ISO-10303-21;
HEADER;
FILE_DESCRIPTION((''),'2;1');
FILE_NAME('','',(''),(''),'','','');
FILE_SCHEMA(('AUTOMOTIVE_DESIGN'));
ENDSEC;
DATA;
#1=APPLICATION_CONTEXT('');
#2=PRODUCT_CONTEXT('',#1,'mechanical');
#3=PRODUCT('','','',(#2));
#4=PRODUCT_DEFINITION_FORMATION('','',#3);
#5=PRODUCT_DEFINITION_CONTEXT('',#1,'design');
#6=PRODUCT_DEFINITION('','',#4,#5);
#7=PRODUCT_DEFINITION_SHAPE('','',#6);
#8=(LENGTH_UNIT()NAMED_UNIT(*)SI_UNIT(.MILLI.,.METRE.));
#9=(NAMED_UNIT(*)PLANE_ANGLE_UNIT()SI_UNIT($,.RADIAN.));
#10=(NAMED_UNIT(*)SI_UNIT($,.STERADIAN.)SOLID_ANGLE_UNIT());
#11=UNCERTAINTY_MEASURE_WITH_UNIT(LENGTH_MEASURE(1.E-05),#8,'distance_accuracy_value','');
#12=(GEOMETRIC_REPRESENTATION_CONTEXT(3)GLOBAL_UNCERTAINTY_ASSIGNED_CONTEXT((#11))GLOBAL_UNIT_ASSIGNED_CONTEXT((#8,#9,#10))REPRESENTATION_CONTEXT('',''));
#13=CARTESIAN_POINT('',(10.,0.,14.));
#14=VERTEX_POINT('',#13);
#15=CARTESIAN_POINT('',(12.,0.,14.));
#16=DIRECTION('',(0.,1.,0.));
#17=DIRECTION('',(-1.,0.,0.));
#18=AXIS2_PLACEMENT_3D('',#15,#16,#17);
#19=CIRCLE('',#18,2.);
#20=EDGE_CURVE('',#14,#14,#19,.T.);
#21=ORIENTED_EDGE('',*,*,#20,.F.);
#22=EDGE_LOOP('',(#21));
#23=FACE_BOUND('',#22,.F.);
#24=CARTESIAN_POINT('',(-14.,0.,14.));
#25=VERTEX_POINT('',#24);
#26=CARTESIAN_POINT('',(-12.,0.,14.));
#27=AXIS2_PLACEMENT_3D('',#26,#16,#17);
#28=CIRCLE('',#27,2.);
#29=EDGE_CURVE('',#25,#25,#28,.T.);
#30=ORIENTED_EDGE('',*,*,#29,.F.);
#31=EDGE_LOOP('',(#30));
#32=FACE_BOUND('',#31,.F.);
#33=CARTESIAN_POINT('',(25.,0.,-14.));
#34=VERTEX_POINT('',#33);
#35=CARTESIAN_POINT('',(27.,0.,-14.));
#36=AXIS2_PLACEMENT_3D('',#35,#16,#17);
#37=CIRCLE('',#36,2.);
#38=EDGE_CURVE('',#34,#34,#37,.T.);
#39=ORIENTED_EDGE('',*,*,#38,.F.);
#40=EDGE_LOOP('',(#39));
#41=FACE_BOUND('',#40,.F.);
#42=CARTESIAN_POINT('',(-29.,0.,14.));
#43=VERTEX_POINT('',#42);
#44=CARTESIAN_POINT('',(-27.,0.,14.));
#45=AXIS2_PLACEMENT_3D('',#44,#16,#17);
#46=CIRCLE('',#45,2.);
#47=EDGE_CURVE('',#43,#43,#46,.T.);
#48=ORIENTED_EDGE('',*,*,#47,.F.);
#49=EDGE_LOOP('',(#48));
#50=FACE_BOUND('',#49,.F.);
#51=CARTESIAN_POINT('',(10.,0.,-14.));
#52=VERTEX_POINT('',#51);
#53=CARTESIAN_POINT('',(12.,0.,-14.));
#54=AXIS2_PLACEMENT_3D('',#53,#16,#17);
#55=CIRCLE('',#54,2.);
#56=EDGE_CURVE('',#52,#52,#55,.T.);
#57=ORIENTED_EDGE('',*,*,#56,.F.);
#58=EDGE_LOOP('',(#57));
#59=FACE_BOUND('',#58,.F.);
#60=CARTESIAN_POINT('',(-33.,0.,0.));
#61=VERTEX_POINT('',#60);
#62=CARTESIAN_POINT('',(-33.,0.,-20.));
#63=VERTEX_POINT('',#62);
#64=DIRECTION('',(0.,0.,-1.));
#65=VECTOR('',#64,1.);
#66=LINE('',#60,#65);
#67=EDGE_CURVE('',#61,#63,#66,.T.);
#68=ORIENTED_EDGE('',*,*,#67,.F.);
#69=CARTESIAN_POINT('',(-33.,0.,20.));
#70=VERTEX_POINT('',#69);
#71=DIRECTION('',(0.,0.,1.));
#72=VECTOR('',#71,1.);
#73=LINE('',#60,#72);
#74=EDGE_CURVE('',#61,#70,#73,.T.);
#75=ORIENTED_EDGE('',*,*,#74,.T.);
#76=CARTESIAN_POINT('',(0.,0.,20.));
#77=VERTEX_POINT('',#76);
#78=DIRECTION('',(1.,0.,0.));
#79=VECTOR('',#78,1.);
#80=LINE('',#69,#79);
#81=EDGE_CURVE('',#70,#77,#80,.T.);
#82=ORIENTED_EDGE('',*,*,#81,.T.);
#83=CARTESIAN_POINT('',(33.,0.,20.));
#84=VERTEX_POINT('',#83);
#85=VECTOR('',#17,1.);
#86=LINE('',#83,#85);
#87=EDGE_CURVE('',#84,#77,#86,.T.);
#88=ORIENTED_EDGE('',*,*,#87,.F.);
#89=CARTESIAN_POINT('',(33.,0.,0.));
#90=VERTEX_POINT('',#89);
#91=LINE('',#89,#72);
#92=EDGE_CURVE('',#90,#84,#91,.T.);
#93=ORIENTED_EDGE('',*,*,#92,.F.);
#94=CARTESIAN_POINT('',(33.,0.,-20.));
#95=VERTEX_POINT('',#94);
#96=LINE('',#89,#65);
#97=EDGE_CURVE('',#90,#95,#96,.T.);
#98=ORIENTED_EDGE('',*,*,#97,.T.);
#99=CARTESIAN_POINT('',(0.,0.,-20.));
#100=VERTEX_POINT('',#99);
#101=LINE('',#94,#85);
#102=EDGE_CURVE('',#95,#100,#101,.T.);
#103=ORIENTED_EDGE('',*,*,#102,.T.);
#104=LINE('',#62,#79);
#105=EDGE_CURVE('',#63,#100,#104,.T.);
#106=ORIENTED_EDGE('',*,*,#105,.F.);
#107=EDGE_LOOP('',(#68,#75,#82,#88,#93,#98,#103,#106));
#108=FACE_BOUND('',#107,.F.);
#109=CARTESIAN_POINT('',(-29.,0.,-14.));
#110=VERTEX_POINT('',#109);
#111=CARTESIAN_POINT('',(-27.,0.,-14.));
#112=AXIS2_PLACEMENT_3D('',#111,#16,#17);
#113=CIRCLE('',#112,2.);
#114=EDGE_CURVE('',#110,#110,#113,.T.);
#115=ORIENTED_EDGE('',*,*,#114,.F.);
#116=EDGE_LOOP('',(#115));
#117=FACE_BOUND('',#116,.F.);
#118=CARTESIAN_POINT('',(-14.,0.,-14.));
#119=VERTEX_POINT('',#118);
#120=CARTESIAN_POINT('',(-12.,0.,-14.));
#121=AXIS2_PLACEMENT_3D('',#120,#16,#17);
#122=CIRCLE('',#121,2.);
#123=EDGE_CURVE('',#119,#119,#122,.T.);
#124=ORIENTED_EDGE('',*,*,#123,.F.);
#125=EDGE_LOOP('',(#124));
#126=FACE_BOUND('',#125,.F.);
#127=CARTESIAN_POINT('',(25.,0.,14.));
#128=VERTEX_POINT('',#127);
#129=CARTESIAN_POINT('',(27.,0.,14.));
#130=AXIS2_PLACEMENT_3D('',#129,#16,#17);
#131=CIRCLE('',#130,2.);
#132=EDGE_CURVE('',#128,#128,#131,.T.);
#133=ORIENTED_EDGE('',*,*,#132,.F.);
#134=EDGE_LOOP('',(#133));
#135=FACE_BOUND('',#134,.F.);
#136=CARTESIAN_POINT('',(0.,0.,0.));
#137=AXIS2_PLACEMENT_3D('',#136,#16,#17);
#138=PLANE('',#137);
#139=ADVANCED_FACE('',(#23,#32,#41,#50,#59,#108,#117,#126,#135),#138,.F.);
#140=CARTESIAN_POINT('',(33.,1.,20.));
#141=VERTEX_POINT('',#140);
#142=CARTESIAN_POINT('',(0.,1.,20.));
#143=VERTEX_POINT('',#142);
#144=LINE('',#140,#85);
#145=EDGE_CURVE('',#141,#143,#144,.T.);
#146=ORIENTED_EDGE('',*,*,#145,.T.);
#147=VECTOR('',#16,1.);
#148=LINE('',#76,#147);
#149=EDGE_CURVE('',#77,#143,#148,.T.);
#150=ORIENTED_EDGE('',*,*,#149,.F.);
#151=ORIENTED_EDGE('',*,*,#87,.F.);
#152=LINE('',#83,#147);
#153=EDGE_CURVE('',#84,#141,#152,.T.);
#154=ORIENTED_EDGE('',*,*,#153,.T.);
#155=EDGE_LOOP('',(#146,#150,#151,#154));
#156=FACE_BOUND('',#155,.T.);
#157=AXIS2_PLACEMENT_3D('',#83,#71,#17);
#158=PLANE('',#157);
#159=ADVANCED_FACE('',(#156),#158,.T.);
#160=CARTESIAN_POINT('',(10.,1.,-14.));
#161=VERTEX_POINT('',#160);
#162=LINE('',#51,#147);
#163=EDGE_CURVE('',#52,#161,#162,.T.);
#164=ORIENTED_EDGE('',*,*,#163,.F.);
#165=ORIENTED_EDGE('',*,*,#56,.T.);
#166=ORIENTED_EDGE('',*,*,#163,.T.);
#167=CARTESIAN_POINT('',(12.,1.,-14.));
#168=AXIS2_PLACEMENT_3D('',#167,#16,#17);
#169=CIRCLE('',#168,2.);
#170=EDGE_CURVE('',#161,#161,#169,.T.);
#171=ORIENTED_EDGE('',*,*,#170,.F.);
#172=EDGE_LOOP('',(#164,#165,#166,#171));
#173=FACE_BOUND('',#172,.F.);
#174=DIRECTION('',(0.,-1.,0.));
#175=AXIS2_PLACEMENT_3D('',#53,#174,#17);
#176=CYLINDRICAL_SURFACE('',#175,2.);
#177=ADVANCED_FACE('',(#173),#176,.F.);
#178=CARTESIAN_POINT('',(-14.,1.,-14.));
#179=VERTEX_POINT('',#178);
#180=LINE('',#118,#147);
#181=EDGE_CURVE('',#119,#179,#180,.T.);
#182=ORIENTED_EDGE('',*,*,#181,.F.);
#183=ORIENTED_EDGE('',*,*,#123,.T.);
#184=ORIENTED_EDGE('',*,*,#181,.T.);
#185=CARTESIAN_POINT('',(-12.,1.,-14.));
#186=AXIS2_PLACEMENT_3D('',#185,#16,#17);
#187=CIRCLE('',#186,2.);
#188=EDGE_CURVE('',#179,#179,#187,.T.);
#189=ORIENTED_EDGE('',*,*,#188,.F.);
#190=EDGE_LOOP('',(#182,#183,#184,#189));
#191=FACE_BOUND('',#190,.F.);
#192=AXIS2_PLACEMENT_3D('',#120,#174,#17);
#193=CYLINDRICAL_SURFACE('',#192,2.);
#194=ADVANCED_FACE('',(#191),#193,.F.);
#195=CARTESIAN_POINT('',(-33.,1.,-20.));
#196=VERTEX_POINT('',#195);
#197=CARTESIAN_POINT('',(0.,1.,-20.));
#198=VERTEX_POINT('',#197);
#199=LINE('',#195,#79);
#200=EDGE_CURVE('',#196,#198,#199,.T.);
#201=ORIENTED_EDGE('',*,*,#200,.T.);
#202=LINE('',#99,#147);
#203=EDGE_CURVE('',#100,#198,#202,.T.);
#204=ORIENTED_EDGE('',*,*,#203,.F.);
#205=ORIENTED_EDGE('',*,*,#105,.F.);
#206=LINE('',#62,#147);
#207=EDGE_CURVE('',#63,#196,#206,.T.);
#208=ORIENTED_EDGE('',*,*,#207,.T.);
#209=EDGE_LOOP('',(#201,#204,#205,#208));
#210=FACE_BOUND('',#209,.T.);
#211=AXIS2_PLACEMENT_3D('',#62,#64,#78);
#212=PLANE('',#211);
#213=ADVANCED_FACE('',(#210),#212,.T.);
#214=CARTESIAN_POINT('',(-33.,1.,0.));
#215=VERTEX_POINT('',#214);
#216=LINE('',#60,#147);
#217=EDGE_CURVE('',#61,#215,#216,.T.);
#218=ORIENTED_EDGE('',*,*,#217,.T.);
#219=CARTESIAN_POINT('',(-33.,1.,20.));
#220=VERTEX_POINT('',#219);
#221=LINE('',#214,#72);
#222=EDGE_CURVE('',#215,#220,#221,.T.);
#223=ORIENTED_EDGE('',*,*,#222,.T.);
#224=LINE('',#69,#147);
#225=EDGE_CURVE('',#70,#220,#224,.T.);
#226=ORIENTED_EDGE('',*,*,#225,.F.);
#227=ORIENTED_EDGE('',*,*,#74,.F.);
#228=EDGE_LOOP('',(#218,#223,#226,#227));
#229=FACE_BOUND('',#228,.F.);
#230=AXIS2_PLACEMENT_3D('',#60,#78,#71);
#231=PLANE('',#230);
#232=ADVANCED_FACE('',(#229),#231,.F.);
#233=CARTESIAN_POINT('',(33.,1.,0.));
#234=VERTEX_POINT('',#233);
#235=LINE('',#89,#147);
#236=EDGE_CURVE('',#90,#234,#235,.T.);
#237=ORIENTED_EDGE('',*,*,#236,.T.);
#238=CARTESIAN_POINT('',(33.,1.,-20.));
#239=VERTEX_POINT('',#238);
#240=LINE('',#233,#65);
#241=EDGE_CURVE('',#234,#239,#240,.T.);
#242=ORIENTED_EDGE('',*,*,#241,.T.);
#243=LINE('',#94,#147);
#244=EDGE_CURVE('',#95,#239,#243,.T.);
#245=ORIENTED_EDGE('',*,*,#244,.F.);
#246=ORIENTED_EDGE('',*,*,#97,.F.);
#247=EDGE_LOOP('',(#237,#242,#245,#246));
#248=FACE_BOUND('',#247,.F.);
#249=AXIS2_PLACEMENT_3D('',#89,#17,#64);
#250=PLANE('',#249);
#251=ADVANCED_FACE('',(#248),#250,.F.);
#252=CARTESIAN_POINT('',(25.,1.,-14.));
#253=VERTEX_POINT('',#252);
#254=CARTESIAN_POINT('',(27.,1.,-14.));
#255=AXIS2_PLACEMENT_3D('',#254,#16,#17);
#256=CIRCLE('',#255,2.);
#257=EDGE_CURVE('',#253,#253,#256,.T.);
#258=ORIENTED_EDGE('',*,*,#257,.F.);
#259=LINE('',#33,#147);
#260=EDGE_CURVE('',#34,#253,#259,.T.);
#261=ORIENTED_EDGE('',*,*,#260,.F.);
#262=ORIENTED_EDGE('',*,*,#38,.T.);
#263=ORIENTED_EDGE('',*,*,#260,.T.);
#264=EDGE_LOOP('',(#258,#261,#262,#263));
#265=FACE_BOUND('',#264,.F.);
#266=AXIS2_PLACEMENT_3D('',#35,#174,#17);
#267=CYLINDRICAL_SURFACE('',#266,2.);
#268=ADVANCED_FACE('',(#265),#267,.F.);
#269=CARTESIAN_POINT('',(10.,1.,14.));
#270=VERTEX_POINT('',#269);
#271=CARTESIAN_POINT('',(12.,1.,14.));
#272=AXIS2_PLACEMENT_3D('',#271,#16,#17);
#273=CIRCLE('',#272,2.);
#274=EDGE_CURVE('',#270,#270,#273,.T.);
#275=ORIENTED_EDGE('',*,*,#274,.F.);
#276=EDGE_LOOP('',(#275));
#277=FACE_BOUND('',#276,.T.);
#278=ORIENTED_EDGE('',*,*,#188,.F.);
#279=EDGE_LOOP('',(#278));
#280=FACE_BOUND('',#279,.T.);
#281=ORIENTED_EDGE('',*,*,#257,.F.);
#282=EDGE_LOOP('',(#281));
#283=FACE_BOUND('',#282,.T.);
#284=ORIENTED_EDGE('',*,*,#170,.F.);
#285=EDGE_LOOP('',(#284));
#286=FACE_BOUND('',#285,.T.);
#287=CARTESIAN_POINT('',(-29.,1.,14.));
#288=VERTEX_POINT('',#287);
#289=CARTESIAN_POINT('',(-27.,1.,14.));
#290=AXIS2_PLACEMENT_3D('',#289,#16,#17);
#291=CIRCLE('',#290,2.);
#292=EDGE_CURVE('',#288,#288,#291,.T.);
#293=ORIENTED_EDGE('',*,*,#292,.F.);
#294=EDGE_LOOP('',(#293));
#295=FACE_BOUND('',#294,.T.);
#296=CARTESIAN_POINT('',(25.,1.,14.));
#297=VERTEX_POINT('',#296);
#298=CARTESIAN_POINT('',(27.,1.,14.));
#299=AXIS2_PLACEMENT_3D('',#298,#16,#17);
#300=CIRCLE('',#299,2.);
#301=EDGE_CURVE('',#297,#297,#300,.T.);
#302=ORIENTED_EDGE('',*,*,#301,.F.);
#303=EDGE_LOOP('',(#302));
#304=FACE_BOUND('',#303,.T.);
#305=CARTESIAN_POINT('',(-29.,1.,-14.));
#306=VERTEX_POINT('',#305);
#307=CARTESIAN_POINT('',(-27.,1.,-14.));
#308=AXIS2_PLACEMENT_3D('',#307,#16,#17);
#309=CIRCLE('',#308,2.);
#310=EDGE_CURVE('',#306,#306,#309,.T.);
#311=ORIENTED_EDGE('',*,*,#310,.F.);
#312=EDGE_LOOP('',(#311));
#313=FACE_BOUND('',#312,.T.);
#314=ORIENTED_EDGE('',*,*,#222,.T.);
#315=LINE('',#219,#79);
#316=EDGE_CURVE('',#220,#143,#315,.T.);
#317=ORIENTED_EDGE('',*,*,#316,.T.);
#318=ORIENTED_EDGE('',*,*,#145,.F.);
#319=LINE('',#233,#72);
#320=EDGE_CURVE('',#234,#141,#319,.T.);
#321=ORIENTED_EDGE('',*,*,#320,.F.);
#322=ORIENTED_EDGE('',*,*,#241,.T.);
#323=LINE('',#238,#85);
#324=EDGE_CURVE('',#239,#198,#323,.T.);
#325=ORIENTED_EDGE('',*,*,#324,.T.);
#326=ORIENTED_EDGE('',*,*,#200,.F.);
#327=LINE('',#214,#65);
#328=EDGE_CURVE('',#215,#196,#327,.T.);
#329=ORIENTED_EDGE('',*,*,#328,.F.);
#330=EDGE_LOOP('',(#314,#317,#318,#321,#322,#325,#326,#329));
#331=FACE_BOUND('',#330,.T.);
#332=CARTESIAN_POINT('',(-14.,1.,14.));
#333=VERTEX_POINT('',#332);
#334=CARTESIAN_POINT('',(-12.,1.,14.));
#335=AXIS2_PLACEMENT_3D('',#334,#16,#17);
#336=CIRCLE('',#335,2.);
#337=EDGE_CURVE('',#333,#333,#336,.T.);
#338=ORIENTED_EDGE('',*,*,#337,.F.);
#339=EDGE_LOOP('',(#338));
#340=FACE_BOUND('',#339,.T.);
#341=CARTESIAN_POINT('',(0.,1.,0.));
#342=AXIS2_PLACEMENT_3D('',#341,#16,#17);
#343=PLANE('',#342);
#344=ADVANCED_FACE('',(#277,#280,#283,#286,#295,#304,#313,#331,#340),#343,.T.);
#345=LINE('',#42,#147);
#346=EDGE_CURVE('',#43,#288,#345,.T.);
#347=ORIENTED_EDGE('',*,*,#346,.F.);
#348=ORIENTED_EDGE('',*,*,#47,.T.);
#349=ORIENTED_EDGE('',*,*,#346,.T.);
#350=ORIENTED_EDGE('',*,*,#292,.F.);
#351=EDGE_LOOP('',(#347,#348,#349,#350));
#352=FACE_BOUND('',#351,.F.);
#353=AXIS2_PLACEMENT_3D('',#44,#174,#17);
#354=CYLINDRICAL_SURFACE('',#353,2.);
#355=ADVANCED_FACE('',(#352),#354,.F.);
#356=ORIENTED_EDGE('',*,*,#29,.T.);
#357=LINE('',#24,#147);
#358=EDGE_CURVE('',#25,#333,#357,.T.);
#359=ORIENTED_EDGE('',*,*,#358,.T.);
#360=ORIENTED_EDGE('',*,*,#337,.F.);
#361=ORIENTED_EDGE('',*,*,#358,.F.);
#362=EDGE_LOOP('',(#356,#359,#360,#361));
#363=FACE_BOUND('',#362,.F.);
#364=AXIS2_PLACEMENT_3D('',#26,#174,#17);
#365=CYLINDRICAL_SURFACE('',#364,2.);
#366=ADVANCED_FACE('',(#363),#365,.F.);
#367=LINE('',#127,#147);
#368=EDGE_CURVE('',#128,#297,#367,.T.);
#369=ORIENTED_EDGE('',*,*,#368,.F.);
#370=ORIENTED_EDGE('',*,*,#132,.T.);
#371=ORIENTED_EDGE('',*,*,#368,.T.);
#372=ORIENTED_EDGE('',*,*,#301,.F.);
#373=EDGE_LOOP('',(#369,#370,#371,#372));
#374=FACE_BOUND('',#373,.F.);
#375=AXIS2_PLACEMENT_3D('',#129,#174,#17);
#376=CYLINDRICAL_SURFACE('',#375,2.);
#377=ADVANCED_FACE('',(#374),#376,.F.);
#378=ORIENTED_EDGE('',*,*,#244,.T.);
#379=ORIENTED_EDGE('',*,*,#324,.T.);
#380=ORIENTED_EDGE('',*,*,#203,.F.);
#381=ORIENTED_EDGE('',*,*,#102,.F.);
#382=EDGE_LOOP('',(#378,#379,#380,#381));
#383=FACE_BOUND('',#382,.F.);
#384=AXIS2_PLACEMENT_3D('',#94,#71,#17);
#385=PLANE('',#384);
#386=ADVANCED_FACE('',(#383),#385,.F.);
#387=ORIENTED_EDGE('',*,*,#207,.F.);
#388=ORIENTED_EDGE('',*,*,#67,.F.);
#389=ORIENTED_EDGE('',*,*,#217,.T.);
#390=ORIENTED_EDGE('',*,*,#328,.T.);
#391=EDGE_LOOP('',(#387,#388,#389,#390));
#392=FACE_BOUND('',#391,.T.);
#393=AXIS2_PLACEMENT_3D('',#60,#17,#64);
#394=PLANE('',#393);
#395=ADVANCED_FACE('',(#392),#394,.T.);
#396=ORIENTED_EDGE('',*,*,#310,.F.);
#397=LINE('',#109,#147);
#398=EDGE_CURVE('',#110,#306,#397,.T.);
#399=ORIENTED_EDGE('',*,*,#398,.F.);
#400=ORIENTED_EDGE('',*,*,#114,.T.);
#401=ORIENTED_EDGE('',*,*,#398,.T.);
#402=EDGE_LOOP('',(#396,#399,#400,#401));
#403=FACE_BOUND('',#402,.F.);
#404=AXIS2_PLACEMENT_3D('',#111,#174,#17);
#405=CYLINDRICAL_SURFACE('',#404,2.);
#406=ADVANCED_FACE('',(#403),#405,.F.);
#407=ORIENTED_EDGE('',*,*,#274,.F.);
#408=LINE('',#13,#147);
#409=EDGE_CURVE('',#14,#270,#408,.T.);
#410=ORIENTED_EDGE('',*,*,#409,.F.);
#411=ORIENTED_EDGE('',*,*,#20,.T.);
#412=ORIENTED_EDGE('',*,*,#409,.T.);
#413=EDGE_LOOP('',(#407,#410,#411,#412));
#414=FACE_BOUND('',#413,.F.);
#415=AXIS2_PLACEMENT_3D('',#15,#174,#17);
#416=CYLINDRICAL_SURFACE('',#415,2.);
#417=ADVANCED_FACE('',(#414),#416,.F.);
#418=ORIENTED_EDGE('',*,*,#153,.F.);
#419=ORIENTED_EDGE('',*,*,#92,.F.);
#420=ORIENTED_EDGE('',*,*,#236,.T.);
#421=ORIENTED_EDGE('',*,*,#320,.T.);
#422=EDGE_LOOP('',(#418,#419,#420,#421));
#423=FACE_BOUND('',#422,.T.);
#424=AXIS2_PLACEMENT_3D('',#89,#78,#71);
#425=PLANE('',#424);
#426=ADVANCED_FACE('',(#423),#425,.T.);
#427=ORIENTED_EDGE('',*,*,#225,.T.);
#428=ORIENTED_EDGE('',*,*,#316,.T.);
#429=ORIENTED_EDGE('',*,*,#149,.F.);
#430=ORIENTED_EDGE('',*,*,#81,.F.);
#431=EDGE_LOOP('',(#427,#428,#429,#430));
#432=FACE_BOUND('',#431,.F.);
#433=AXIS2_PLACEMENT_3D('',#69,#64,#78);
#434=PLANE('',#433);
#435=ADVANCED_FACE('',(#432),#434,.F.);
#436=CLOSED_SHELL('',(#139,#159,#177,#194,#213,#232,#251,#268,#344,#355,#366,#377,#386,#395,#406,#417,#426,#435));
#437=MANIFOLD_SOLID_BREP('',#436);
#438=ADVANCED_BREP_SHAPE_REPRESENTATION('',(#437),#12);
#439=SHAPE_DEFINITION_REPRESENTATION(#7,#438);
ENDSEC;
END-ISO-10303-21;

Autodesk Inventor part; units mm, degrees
ref_plane "YZ Plane" through (0, 0, 0) normal (1, 0, 0) x (0, 1, 0)
ref_plane "XZ Plane" through (0, 0, 0) normal (0, 1, 0) x (-1, 0, 0)
ref_plane "XY Plane" through (0, 0, 0) normal (0, 0, 1) x (1, 0, 0)
sketch "Sketch1" plane through (0, 0, 0) normal (0, 1, 0) x (-1, 0, 0)
  line L0 (-33, 20) -> (0, 20)
  line L1 (0, 20) -> (0, 0) construction
  line L2 (0, 0) -> (-33, 0) construction
  line L3 (-33, 0) -> (-33, 20)
  line L4 (-37.8717, 14) -> (4.6091, 14) construction
  circle A0 centre (-12, 14) radius 2
  circle A1 centre (-27, 14) radius 2
  line L5 (33, 20) -> (0, 20)
  line L6 (33, 0) -> (33, 20)
  line L7 (37.8717, 14) -> (-4.6091, 14) construction
  circle A2 centre (12, 14) radius 2
  circle A3 centre (27, 14) radius 2
  line L8 (-33, -20) -> (0, -20)
  line L9 (0, -20) -> (0, 0) construction
  line L10 (-33, 0) -> (-33, -20)
  line L11 (-37.8717, -14) -> (4.6091, -14) construction
  circle A4 centre (-12, -14) radius 2
  circle A5 centre (-27, -14) radius 2
  line L12 (33, -20) -> (0, -20)
  line L13 (37.8717, -14) -> (-4.6091, -14) construction
  circle A6 centre (12, -14) radius 2
  circle A7 centre (27, -14) radius 2
  line L14 (33, 0) -> (33, -20)
  dimension "d0" = 33
  dimension "d1" = 20
  dimension "d2" = 6
  dimension "Bracket_Hole_Diameter" = 4
  dimension "d4" = 6
  dimension "d5" = 21
extrude "Plate1" add sketch "Sketch1" along normal blind 1
equation "\"BendRadius\" = Thickness"
equation "\"BendReliefWidth\" = Thickness"
equation "\"BendReliefDepth\" = 0.5 * Thickness"
equation "\"CornerReliefSize\" = 4 * Thickness"
equation "\"MinimumRemnant\" = 2 * Thickness"
equation "\"TransitionRadius\" = BendRadius"
equation "\"JacobiRadiusSize\" = BendRadius"
equation "\"GapSize\" = Thickness"
equation "\"d6\" = BendRadius"
equation "\"Bracket_Holes_LateralDistance\" = 28"
equation "\"Bracket_Holes_Distance\" = 15"
equation "\"Bracket_Holes_UnfoldedDistance\" = 24"
equation "\"Thickness\" = 1"
properties part number "BracketUnfolded" material "Steel, Galvanized"
